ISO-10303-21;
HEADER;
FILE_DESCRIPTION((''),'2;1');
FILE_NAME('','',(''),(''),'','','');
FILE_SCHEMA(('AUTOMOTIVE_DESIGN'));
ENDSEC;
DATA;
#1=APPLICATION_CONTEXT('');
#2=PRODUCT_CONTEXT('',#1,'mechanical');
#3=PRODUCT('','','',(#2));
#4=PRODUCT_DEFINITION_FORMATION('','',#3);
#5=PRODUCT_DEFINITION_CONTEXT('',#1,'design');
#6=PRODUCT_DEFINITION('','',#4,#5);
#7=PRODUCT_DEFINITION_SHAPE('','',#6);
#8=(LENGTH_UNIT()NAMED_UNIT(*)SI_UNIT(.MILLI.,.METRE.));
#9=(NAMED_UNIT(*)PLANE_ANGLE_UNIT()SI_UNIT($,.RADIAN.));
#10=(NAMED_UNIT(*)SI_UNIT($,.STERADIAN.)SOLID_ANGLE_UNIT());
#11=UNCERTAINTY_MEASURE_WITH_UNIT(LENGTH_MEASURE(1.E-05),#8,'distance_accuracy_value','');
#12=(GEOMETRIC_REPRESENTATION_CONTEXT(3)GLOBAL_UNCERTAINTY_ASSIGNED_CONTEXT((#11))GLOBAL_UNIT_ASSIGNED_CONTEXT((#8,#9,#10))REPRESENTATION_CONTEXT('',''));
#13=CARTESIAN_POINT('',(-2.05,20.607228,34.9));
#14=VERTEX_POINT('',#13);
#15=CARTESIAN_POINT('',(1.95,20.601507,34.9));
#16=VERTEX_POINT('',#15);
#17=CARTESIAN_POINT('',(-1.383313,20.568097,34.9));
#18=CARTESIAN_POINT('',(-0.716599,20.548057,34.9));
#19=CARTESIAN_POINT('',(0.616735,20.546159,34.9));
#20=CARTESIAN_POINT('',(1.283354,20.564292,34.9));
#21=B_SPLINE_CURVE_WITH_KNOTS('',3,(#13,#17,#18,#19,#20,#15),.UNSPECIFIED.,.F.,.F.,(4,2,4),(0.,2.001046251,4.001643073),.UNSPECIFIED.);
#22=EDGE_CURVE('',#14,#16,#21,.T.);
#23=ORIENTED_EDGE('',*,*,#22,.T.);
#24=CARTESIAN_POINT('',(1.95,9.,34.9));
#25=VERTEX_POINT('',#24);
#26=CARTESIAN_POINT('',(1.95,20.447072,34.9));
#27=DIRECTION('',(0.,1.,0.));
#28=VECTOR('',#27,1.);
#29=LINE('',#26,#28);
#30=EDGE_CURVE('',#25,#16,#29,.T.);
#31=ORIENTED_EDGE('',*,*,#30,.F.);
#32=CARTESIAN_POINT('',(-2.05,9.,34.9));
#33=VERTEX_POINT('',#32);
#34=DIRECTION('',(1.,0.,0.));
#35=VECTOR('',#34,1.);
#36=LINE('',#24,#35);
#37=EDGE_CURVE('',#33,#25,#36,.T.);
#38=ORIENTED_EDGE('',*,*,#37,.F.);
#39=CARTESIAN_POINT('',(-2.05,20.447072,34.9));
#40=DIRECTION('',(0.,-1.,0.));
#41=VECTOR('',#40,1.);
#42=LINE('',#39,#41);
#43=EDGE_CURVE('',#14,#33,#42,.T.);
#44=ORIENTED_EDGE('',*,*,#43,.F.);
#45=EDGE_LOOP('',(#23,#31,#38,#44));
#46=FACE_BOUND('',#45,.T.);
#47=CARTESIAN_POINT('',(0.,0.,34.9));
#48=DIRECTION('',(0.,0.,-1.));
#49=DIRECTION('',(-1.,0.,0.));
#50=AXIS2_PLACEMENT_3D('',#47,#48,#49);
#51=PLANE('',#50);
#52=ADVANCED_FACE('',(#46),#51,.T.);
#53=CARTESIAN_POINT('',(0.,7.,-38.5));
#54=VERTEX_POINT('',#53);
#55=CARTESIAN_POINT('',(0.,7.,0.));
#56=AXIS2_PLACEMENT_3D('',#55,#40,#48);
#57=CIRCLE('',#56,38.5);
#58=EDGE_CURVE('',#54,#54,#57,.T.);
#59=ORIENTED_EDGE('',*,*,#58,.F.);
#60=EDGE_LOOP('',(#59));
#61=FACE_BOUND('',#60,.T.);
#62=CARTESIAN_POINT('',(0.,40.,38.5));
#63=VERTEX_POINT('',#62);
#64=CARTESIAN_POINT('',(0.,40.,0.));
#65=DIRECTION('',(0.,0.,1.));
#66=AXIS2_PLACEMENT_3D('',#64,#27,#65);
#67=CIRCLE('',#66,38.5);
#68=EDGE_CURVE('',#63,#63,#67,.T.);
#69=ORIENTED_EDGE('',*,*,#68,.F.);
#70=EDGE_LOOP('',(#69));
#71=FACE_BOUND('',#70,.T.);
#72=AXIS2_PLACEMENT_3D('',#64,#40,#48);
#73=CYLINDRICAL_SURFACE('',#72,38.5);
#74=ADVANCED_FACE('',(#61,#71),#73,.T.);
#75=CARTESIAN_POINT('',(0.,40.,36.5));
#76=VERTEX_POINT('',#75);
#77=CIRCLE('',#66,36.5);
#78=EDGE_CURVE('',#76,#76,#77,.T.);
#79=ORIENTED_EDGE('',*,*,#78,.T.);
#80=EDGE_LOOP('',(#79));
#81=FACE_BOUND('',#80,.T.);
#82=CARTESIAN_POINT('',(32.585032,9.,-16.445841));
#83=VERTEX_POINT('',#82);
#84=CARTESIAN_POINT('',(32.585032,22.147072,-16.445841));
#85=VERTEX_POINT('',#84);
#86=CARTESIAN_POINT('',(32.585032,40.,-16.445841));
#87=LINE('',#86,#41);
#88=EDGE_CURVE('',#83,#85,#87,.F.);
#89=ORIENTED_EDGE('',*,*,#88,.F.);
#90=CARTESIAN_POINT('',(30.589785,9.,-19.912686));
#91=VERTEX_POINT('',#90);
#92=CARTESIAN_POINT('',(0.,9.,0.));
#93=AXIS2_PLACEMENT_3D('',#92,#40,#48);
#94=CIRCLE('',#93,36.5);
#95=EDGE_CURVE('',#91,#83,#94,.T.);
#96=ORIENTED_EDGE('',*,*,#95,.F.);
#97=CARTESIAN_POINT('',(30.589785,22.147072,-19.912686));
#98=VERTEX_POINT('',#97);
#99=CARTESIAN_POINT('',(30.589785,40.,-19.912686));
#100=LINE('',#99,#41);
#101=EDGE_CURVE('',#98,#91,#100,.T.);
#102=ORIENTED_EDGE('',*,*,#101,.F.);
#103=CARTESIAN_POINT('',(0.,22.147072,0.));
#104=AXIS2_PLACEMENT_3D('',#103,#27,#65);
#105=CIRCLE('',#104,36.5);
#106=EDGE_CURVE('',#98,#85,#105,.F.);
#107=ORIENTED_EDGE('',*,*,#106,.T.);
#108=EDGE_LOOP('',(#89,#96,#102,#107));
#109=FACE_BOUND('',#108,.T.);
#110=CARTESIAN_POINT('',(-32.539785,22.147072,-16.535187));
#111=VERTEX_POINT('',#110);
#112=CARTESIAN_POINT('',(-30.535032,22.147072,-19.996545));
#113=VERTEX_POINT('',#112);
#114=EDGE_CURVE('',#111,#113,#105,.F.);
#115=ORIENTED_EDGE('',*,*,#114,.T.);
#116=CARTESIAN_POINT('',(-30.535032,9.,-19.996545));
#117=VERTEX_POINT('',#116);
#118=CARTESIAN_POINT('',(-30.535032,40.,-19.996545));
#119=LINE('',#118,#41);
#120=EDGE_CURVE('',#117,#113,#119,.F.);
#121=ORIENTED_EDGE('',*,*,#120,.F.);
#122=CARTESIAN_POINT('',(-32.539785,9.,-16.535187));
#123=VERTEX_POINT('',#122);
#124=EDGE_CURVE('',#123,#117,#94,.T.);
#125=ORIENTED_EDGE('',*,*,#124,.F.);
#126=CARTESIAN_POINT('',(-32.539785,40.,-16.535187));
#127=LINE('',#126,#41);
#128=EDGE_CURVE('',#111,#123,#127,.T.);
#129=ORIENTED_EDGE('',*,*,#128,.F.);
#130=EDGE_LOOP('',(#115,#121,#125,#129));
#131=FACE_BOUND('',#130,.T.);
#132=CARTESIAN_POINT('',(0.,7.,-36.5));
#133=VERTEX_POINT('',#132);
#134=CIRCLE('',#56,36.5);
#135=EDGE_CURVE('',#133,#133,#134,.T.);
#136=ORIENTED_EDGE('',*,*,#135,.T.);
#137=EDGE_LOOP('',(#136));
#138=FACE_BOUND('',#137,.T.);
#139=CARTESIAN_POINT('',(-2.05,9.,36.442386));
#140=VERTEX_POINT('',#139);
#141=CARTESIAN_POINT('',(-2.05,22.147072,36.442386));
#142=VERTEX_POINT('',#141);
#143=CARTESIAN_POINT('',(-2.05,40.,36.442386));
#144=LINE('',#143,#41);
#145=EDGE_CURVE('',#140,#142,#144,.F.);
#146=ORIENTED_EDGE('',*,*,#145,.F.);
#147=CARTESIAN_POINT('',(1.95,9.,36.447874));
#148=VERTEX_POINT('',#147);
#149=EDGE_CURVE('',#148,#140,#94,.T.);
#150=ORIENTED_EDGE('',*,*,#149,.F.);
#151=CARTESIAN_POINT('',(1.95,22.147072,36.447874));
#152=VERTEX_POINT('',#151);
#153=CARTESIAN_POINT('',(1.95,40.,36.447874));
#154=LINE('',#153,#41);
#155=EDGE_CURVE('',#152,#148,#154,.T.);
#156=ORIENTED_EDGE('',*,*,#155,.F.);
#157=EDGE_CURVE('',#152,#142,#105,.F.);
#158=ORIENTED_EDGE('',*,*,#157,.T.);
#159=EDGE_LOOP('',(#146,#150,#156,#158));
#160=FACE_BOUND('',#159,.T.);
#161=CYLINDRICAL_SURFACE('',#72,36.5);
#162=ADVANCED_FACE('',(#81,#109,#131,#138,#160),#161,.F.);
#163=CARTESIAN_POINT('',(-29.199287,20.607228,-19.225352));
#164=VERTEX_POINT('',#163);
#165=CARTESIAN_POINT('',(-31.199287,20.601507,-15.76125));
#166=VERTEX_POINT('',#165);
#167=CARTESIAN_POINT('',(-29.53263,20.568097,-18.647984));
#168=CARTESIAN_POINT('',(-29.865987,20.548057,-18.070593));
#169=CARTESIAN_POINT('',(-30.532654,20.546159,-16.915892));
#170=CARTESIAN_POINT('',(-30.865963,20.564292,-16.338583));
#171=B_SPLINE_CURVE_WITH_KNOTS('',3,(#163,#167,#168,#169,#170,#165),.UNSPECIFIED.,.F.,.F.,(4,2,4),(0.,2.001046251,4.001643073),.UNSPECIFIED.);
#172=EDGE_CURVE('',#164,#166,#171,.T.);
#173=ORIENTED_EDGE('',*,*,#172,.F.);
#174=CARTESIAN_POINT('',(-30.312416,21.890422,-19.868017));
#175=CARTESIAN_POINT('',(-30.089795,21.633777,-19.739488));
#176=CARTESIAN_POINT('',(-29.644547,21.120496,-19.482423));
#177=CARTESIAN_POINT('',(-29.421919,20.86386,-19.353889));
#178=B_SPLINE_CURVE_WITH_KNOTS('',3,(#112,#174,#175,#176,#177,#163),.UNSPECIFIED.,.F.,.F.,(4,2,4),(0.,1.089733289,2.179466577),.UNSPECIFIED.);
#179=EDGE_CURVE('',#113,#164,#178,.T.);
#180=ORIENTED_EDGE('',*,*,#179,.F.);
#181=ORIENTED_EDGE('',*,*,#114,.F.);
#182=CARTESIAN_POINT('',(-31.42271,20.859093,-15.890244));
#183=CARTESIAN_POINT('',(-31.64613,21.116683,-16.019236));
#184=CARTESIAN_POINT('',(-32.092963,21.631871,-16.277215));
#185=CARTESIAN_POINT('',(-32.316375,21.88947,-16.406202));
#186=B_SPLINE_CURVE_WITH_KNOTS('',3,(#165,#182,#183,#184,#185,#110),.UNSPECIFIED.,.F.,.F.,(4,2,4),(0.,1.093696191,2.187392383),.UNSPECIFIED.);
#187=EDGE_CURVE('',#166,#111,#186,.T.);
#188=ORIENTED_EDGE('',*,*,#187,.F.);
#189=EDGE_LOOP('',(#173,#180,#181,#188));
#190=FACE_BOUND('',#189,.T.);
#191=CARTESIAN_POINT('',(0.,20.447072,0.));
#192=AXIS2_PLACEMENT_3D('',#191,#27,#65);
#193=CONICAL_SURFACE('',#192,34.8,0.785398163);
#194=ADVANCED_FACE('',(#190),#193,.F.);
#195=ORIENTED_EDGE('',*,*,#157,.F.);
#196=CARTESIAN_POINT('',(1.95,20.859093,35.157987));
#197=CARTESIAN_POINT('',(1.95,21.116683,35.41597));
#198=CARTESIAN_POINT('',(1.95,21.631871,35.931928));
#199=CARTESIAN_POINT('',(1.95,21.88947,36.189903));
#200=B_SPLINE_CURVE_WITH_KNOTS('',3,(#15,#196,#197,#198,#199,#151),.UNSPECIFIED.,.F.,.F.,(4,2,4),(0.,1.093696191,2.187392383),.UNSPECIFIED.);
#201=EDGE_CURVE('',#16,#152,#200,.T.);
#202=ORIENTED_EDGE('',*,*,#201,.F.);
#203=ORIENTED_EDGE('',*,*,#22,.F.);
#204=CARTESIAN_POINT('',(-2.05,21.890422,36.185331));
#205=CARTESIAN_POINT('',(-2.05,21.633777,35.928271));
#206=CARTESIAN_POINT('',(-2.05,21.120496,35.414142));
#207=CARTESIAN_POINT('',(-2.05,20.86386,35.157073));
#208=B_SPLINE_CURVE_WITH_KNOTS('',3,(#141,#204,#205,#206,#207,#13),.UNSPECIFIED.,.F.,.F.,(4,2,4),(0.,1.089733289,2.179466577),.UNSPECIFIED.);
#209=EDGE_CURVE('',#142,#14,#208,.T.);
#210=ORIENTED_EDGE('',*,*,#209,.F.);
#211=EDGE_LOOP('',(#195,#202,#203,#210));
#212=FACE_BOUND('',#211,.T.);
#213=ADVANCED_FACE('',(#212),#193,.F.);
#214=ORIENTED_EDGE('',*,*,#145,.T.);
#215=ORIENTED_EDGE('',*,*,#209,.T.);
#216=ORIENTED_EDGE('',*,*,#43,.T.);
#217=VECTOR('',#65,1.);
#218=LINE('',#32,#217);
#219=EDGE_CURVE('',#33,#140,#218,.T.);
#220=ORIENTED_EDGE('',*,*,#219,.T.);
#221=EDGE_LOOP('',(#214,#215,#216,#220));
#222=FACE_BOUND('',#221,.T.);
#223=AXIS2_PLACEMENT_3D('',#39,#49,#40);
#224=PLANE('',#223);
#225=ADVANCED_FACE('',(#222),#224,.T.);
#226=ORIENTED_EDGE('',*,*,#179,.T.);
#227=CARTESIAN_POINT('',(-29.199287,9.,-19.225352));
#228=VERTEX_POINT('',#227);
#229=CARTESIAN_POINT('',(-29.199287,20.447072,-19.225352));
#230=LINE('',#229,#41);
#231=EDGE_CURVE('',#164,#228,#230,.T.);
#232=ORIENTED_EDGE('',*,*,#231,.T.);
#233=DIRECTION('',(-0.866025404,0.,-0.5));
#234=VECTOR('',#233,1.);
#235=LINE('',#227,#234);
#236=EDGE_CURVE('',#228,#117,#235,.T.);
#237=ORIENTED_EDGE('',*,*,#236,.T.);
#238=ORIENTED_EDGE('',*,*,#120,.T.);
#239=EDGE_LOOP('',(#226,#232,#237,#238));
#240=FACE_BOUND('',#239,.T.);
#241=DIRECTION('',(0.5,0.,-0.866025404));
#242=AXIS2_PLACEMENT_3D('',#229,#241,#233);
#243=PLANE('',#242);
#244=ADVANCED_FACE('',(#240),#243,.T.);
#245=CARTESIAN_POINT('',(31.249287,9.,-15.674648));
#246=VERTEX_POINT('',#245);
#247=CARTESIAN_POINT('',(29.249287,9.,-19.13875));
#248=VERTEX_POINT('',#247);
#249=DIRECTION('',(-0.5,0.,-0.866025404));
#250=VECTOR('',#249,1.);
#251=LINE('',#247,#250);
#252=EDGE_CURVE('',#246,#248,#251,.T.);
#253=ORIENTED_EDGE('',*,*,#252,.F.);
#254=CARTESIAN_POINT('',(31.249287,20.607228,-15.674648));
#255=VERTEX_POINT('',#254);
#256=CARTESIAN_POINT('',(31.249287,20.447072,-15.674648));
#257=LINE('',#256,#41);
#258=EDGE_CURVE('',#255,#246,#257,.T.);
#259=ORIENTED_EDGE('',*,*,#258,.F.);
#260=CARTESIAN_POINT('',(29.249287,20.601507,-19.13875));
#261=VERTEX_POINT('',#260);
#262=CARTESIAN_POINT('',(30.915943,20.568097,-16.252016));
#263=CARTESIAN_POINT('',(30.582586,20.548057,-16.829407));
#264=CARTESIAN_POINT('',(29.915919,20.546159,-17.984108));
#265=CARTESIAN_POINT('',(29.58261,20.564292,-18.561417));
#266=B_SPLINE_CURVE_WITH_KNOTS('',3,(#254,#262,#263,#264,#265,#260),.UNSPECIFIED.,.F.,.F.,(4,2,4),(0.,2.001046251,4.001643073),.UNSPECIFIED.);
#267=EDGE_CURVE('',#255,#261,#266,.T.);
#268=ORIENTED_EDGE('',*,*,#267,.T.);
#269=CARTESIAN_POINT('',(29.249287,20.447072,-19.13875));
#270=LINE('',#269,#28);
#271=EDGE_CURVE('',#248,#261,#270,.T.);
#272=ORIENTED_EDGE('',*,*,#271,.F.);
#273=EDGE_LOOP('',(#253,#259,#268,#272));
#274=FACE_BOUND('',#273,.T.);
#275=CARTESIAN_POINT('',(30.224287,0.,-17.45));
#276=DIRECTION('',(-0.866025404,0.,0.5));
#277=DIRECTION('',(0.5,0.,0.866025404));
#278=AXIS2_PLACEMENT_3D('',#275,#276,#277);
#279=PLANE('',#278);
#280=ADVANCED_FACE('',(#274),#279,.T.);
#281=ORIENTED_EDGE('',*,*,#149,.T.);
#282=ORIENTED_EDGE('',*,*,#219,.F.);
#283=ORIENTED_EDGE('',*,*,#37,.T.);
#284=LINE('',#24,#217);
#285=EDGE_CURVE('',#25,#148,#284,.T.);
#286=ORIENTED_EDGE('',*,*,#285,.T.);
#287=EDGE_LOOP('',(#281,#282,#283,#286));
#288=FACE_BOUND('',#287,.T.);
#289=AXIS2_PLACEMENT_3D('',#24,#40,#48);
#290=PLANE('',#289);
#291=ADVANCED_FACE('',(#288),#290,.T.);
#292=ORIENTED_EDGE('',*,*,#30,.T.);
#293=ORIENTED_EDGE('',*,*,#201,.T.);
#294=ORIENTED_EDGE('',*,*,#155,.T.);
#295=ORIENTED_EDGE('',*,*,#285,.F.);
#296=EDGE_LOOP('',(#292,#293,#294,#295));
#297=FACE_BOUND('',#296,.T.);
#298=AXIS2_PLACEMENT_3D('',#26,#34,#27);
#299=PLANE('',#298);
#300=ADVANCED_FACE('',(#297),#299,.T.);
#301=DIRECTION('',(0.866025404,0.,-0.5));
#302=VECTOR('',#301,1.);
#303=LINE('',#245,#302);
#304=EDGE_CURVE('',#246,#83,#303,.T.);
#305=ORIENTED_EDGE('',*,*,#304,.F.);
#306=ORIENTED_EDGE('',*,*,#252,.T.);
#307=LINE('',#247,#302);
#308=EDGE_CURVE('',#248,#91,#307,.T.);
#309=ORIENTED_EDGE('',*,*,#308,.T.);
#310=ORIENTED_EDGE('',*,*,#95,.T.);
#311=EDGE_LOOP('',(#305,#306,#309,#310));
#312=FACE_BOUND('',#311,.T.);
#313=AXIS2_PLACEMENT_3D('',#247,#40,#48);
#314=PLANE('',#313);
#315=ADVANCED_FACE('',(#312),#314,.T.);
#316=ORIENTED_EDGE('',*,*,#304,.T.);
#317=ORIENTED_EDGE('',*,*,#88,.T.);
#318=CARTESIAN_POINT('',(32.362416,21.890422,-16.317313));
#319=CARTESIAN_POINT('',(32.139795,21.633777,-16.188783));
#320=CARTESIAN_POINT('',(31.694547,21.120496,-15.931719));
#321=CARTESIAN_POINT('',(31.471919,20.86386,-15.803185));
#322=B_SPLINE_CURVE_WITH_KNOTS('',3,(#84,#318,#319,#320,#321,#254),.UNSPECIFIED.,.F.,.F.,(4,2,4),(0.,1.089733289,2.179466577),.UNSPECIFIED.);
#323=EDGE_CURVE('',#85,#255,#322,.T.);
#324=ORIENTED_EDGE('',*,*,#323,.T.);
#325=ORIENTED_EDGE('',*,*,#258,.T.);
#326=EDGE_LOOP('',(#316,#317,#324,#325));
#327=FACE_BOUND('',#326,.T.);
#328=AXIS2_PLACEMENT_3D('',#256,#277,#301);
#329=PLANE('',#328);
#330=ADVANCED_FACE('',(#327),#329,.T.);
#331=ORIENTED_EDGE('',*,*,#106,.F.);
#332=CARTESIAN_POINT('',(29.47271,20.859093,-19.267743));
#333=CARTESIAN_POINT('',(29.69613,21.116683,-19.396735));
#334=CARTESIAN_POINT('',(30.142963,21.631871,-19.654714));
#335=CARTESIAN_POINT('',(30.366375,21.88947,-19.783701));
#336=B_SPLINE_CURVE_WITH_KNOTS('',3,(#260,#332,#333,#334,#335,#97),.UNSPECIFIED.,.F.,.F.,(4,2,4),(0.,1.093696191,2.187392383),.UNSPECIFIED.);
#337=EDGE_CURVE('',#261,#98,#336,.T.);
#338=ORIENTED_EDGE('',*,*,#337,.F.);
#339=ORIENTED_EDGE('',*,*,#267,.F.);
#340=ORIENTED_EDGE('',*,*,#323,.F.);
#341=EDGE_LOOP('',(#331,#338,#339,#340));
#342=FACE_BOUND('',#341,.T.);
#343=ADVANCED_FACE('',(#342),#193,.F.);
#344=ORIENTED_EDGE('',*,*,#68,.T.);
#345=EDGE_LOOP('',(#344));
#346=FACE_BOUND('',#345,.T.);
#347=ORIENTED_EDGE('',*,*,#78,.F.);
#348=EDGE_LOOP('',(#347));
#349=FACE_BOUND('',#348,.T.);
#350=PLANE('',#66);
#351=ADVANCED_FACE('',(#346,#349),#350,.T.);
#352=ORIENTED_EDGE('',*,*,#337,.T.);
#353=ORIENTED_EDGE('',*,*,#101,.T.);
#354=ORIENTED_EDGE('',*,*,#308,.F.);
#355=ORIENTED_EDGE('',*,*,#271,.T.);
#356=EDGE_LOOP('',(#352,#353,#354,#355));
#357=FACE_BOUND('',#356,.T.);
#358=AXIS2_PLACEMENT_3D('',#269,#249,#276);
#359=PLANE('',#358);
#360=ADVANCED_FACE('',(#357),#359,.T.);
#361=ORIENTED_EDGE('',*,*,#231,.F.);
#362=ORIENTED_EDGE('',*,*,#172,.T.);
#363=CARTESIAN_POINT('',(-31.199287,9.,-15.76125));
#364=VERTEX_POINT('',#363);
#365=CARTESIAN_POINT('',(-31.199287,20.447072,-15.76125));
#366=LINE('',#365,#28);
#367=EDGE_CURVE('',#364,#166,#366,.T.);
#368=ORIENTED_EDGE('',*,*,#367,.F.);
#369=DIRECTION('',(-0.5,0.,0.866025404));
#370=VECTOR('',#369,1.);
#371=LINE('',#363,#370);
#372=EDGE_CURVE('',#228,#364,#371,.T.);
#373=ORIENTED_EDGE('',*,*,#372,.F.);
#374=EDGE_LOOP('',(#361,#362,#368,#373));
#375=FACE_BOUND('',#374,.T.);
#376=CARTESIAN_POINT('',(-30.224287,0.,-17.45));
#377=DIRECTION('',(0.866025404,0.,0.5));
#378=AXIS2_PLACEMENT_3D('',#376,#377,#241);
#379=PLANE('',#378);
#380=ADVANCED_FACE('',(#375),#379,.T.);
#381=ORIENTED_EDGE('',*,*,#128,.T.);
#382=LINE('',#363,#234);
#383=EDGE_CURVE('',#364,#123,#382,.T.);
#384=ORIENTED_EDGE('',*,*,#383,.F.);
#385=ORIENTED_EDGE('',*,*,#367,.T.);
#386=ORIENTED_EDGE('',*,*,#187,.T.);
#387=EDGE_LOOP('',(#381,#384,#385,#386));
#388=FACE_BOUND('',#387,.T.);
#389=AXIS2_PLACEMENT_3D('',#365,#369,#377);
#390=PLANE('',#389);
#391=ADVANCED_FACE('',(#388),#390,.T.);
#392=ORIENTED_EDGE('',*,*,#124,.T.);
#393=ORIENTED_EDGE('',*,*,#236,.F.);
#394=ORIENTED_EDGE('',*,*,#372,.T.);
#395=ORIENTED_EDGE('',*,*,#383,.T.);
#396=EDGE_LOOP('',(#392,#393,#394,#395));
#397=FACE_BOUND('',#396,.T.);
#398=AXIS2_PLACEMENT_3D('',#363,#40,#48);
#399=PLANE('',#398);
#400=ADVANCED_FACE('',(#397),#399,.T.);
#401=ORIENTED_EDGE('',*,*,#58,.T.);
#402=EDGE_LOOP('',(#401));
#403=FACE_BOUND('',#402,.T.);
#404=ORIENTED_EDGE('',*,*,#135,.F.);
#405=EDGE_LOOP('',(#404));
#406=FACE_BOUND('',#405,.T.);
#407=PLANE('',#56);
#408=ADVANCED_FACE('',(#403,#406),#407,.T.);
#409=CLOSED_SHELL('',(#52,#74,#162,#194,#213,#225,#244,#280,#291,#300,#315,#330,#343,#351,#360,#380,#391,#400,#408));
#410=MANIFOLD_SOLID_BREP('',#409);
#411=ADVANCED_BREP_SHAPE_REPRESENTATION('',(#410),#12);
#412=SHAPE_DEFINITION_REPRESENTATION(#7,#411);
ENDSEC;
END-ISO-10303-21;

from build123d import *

# Parameters (mm, degrees)
SKETCH_1_R               = 38.5
SKETCH_1_R_2             = 36.5
EXTRUDE_1_DEPTH          = 40
EXTRUDE_3_DEPTH          = 1.6
PATTERN_CIRCULAR_1_COUNT = 3
SKETCH_3_R               = 52.927820275
CUT_EXTRUDE_1_DEPTH      = 7
CHAMFER_1_SIZE           = 1.7


with BuildPart() as part:
    # Эскиз1 → Бобышка-Вытянуть1 (new body)
    with BuildSketch(Plane(origin=(0, 0, 0), x_dir=(1, 0, 0), z_dir=(0, 1, 0))):
        with Locations(Location((0, 0, 0), (0, 0, 270))):
            Circle(SKETCH_1_R)
        with Locations(Location((0, 0, 0), (0, 0, 270))):
            Circle(SKETCH_1_R_2, mode=Mode.SUBTRACT)
    extrude(amount=EXTRUDE_1_DEPTH)

    # Эскиз2 → Бобышка-Вытянуть3 (add)
    with BuildSketch(Plane.XY.offset(36.5)):
        Polygon((1.95, 20.447072268), (-0.95, 20.447072268), (-2.05, 20.447072268), (-2.05, 9), (1.95, 9), align=None)
    extrude_3 = extrude(amount=-EXTRUDE_3_DEPTH)

    # Круговой массив1: Бобышка-Вытянуть3 ×3 about axis
    pattern_circular_1_axis = Axis((0, 0, 0), (0, 1, 0))
    for i in range(1, PATTERN_CIRCULAR_1_COUNT):
        add(extrude_3.rotate(pattern_circular_1_axis, i * 360 / PATTERN_CIRCULAR_1_COUNT))

    # Эскиз3 → Вырез-Вытянуть1 (cut)
    with BuildSketch(Plane.XZ):
        Circle(SKETCH_3_R)
    extrude(amount=-CUT_EXTRUDE_1_DEPTH, mode=Mode.SUBTRACT)

    # Фаска1
    # the kernel refuses this chamfer: 1.7 mm, written as the material it adds along each edge
    with BuildSketch(Plane(origin=(0, 20.447072268, 0), x_dir=(0, 0, 1), z_dir=(1, 0, 0))) as chamfer_1_piece_1_section:
        Polygon((36.5, -CHAMFER_1_SIZE), (36.5 - CHAMFER_1_SIZE, 0), (36.5, 0), align=None)
    chamfer_1_piece_1 = revolve(axis=Axis((0, 20.447072268, 0), (0, -1, 0)), revolution_arc=10.082397384, mode=Mode.PRIVATE)
    chamfer_1_piece_1 = split(chamfer_1_piece_1, bisect_by=Plane(origin=(-2.05, 21.014554038, 35.932884204), z_dir=(1, 0, 0)), keep=Keep.TOP, mode=Mode.PRIVATE)
    chamfer_1_piece_1 = split(chamfer_1_piece_1, bisect_by=Plane(origin=(-1.024016217, 21.014554038, 34.9), z_dir=(0, 0, 1)), keep=Keep.TOP, mode=Mode.PRIVATE)
    add(chamfer_1_piece_1)
    with BuildSketch(Plane(origin=(0, 20.447072268, 0), x_dir=(-0.9392452885856895, 0, -0.3432466866112253), z_dir=(-0.3432466866112253, 0, 0.9392452885856895))) as chamfer_1_piece_2_section:
        Polygon((36.5, -CHAMFER_1_SIZE), (36.5 - CHAMFER_1_SIZE, 0), (36.5, 0), align=None)
    chamfer_1_piece_2 = revolve(axis=Axis((0, 20.447072268, 0), (0, -1, 0)), revolution_arc=20.007603595, mode=Mode.PRIVATE)
    chamfer_1_piece_2 = split(chamfer_1_piece_2, bisect_by=Plane(origin=(-32.094466273, 21.014490137, -16.278082692), z_dir=(0.5000000000000004, 0, -0.8660254037844384)), keep=Keep.TOP, mode=Mode.PRIVATE)
    chamfer_1_piece_2 = split(chamfer_1_piece_2, bisect_by=Plane(origin=(-30.094466273, 21.014490137, -19.742184307), z_dir=(-0.5000000000000004, 0, 0.8660254037844384)), keep=Keep.TOP, mode=Mode.PRIVATE)
    chamfer_1_piece_2 = split(chamfer_1_piece_2, bisect_by=Plane(origin=(-30.199383778, 21.014490137, -17.493132939), z_dir=(-0.8660254037844384, 0, -0.5000000000000004)), keep=Keep.TOP, mode=Mode.PRIVATE)
    add(chamfer_1_piece_2)
    with BuildSketch(Plane(origin=(0, 20.447072268, 0), x_dir=(0.7668829946630015, 0, -0.6417869369944413), z_dir=(-0.6417869369944413, 0, -0.7668829946630015))) as chamfer_1_piece_3_section:
        Polygon((36.5, -CHAMFER_1_SIZE), (36.5 - CHAMFER_1_SIZE, 0), (36.5, 0), align=None)
    chamfer_1_piece_3 = revolve(axis=Axis((0, 20.447072268, 0), (0, -1, 0)), revolution_arc=20.007603595, mode=Mode.PRIVATE)
    chamfer_1_piece_3 = split(chamfer_1_piece_3, bisect_by=Plane(origin=(30.144466273, 21.014490137, -19.655581767), z_dir=(0.49999999999999983, 0, 0.8660254037844388)), keep=Keep.TOP, mode=Mode.PRIVATE)
    chamfer_1_piece_3 = split(chamfer_1_piece_3, bisect_by=Plane(origin=(32.144466273, 21.014490137, -16.191480152), z_dir=(-0.49999999999999983, 0, -0.8660254037844388)), keep=Keep.TOP, mode=Mode.PRIVATE)
    chamfer_1_piece_3 = split(chamfer_1_piece_3, bisect_by=Plane(origin=(30.249189406, 21.014490137, -17.406867061), z_dir=(0.8660254037844388, 0, -0.49999999999999983)), keep=Keep.TOP, mode=Mode.PRIVATE)
    add(chamfer_1_piece_3)
    with BuildSketch(Plane(origin=(0, 20.447072268, 0), x_dir=(0.17236211792697714, 0, 0.9850336544015776), z_dir=(0.9850336544015776, 0, -0.17236211792697714))) as chamfer_1_piece_4_section:
        Polygon((36.5, -CHAMFER_1_SIZE), (36.5 - CHAMFER_1_SIZE, 0), (36.5, 0), align=None)
    chamfer_1_piece_4 = revolve(axis=Axis((0, 20.447072268, 0), (0, -1, 0)), revolution_arc=9.925186074, mode=Mode.PRIVATE)
    chamfer_1_piece_4 = split(chamfer_1_piece_4, bisect_by=Plane(origin=(1.95, 21.014422977, 35.934484575), z_dir=(-1, 0, 0)), keep=Keep.TOP, mode=Mode.PRIVATE)
    chamfer_1_piece_4 = split(chamfer_1_piece_4, bisect_by=Plane(origin=(0.974165445, 21.014422977, 34.9), z_dir=(0, 0, 1)), keep=Keep.TOP, mode=Mode.PRIVATE)
    add(chamfer_1_piece_4)


solid = part.part
